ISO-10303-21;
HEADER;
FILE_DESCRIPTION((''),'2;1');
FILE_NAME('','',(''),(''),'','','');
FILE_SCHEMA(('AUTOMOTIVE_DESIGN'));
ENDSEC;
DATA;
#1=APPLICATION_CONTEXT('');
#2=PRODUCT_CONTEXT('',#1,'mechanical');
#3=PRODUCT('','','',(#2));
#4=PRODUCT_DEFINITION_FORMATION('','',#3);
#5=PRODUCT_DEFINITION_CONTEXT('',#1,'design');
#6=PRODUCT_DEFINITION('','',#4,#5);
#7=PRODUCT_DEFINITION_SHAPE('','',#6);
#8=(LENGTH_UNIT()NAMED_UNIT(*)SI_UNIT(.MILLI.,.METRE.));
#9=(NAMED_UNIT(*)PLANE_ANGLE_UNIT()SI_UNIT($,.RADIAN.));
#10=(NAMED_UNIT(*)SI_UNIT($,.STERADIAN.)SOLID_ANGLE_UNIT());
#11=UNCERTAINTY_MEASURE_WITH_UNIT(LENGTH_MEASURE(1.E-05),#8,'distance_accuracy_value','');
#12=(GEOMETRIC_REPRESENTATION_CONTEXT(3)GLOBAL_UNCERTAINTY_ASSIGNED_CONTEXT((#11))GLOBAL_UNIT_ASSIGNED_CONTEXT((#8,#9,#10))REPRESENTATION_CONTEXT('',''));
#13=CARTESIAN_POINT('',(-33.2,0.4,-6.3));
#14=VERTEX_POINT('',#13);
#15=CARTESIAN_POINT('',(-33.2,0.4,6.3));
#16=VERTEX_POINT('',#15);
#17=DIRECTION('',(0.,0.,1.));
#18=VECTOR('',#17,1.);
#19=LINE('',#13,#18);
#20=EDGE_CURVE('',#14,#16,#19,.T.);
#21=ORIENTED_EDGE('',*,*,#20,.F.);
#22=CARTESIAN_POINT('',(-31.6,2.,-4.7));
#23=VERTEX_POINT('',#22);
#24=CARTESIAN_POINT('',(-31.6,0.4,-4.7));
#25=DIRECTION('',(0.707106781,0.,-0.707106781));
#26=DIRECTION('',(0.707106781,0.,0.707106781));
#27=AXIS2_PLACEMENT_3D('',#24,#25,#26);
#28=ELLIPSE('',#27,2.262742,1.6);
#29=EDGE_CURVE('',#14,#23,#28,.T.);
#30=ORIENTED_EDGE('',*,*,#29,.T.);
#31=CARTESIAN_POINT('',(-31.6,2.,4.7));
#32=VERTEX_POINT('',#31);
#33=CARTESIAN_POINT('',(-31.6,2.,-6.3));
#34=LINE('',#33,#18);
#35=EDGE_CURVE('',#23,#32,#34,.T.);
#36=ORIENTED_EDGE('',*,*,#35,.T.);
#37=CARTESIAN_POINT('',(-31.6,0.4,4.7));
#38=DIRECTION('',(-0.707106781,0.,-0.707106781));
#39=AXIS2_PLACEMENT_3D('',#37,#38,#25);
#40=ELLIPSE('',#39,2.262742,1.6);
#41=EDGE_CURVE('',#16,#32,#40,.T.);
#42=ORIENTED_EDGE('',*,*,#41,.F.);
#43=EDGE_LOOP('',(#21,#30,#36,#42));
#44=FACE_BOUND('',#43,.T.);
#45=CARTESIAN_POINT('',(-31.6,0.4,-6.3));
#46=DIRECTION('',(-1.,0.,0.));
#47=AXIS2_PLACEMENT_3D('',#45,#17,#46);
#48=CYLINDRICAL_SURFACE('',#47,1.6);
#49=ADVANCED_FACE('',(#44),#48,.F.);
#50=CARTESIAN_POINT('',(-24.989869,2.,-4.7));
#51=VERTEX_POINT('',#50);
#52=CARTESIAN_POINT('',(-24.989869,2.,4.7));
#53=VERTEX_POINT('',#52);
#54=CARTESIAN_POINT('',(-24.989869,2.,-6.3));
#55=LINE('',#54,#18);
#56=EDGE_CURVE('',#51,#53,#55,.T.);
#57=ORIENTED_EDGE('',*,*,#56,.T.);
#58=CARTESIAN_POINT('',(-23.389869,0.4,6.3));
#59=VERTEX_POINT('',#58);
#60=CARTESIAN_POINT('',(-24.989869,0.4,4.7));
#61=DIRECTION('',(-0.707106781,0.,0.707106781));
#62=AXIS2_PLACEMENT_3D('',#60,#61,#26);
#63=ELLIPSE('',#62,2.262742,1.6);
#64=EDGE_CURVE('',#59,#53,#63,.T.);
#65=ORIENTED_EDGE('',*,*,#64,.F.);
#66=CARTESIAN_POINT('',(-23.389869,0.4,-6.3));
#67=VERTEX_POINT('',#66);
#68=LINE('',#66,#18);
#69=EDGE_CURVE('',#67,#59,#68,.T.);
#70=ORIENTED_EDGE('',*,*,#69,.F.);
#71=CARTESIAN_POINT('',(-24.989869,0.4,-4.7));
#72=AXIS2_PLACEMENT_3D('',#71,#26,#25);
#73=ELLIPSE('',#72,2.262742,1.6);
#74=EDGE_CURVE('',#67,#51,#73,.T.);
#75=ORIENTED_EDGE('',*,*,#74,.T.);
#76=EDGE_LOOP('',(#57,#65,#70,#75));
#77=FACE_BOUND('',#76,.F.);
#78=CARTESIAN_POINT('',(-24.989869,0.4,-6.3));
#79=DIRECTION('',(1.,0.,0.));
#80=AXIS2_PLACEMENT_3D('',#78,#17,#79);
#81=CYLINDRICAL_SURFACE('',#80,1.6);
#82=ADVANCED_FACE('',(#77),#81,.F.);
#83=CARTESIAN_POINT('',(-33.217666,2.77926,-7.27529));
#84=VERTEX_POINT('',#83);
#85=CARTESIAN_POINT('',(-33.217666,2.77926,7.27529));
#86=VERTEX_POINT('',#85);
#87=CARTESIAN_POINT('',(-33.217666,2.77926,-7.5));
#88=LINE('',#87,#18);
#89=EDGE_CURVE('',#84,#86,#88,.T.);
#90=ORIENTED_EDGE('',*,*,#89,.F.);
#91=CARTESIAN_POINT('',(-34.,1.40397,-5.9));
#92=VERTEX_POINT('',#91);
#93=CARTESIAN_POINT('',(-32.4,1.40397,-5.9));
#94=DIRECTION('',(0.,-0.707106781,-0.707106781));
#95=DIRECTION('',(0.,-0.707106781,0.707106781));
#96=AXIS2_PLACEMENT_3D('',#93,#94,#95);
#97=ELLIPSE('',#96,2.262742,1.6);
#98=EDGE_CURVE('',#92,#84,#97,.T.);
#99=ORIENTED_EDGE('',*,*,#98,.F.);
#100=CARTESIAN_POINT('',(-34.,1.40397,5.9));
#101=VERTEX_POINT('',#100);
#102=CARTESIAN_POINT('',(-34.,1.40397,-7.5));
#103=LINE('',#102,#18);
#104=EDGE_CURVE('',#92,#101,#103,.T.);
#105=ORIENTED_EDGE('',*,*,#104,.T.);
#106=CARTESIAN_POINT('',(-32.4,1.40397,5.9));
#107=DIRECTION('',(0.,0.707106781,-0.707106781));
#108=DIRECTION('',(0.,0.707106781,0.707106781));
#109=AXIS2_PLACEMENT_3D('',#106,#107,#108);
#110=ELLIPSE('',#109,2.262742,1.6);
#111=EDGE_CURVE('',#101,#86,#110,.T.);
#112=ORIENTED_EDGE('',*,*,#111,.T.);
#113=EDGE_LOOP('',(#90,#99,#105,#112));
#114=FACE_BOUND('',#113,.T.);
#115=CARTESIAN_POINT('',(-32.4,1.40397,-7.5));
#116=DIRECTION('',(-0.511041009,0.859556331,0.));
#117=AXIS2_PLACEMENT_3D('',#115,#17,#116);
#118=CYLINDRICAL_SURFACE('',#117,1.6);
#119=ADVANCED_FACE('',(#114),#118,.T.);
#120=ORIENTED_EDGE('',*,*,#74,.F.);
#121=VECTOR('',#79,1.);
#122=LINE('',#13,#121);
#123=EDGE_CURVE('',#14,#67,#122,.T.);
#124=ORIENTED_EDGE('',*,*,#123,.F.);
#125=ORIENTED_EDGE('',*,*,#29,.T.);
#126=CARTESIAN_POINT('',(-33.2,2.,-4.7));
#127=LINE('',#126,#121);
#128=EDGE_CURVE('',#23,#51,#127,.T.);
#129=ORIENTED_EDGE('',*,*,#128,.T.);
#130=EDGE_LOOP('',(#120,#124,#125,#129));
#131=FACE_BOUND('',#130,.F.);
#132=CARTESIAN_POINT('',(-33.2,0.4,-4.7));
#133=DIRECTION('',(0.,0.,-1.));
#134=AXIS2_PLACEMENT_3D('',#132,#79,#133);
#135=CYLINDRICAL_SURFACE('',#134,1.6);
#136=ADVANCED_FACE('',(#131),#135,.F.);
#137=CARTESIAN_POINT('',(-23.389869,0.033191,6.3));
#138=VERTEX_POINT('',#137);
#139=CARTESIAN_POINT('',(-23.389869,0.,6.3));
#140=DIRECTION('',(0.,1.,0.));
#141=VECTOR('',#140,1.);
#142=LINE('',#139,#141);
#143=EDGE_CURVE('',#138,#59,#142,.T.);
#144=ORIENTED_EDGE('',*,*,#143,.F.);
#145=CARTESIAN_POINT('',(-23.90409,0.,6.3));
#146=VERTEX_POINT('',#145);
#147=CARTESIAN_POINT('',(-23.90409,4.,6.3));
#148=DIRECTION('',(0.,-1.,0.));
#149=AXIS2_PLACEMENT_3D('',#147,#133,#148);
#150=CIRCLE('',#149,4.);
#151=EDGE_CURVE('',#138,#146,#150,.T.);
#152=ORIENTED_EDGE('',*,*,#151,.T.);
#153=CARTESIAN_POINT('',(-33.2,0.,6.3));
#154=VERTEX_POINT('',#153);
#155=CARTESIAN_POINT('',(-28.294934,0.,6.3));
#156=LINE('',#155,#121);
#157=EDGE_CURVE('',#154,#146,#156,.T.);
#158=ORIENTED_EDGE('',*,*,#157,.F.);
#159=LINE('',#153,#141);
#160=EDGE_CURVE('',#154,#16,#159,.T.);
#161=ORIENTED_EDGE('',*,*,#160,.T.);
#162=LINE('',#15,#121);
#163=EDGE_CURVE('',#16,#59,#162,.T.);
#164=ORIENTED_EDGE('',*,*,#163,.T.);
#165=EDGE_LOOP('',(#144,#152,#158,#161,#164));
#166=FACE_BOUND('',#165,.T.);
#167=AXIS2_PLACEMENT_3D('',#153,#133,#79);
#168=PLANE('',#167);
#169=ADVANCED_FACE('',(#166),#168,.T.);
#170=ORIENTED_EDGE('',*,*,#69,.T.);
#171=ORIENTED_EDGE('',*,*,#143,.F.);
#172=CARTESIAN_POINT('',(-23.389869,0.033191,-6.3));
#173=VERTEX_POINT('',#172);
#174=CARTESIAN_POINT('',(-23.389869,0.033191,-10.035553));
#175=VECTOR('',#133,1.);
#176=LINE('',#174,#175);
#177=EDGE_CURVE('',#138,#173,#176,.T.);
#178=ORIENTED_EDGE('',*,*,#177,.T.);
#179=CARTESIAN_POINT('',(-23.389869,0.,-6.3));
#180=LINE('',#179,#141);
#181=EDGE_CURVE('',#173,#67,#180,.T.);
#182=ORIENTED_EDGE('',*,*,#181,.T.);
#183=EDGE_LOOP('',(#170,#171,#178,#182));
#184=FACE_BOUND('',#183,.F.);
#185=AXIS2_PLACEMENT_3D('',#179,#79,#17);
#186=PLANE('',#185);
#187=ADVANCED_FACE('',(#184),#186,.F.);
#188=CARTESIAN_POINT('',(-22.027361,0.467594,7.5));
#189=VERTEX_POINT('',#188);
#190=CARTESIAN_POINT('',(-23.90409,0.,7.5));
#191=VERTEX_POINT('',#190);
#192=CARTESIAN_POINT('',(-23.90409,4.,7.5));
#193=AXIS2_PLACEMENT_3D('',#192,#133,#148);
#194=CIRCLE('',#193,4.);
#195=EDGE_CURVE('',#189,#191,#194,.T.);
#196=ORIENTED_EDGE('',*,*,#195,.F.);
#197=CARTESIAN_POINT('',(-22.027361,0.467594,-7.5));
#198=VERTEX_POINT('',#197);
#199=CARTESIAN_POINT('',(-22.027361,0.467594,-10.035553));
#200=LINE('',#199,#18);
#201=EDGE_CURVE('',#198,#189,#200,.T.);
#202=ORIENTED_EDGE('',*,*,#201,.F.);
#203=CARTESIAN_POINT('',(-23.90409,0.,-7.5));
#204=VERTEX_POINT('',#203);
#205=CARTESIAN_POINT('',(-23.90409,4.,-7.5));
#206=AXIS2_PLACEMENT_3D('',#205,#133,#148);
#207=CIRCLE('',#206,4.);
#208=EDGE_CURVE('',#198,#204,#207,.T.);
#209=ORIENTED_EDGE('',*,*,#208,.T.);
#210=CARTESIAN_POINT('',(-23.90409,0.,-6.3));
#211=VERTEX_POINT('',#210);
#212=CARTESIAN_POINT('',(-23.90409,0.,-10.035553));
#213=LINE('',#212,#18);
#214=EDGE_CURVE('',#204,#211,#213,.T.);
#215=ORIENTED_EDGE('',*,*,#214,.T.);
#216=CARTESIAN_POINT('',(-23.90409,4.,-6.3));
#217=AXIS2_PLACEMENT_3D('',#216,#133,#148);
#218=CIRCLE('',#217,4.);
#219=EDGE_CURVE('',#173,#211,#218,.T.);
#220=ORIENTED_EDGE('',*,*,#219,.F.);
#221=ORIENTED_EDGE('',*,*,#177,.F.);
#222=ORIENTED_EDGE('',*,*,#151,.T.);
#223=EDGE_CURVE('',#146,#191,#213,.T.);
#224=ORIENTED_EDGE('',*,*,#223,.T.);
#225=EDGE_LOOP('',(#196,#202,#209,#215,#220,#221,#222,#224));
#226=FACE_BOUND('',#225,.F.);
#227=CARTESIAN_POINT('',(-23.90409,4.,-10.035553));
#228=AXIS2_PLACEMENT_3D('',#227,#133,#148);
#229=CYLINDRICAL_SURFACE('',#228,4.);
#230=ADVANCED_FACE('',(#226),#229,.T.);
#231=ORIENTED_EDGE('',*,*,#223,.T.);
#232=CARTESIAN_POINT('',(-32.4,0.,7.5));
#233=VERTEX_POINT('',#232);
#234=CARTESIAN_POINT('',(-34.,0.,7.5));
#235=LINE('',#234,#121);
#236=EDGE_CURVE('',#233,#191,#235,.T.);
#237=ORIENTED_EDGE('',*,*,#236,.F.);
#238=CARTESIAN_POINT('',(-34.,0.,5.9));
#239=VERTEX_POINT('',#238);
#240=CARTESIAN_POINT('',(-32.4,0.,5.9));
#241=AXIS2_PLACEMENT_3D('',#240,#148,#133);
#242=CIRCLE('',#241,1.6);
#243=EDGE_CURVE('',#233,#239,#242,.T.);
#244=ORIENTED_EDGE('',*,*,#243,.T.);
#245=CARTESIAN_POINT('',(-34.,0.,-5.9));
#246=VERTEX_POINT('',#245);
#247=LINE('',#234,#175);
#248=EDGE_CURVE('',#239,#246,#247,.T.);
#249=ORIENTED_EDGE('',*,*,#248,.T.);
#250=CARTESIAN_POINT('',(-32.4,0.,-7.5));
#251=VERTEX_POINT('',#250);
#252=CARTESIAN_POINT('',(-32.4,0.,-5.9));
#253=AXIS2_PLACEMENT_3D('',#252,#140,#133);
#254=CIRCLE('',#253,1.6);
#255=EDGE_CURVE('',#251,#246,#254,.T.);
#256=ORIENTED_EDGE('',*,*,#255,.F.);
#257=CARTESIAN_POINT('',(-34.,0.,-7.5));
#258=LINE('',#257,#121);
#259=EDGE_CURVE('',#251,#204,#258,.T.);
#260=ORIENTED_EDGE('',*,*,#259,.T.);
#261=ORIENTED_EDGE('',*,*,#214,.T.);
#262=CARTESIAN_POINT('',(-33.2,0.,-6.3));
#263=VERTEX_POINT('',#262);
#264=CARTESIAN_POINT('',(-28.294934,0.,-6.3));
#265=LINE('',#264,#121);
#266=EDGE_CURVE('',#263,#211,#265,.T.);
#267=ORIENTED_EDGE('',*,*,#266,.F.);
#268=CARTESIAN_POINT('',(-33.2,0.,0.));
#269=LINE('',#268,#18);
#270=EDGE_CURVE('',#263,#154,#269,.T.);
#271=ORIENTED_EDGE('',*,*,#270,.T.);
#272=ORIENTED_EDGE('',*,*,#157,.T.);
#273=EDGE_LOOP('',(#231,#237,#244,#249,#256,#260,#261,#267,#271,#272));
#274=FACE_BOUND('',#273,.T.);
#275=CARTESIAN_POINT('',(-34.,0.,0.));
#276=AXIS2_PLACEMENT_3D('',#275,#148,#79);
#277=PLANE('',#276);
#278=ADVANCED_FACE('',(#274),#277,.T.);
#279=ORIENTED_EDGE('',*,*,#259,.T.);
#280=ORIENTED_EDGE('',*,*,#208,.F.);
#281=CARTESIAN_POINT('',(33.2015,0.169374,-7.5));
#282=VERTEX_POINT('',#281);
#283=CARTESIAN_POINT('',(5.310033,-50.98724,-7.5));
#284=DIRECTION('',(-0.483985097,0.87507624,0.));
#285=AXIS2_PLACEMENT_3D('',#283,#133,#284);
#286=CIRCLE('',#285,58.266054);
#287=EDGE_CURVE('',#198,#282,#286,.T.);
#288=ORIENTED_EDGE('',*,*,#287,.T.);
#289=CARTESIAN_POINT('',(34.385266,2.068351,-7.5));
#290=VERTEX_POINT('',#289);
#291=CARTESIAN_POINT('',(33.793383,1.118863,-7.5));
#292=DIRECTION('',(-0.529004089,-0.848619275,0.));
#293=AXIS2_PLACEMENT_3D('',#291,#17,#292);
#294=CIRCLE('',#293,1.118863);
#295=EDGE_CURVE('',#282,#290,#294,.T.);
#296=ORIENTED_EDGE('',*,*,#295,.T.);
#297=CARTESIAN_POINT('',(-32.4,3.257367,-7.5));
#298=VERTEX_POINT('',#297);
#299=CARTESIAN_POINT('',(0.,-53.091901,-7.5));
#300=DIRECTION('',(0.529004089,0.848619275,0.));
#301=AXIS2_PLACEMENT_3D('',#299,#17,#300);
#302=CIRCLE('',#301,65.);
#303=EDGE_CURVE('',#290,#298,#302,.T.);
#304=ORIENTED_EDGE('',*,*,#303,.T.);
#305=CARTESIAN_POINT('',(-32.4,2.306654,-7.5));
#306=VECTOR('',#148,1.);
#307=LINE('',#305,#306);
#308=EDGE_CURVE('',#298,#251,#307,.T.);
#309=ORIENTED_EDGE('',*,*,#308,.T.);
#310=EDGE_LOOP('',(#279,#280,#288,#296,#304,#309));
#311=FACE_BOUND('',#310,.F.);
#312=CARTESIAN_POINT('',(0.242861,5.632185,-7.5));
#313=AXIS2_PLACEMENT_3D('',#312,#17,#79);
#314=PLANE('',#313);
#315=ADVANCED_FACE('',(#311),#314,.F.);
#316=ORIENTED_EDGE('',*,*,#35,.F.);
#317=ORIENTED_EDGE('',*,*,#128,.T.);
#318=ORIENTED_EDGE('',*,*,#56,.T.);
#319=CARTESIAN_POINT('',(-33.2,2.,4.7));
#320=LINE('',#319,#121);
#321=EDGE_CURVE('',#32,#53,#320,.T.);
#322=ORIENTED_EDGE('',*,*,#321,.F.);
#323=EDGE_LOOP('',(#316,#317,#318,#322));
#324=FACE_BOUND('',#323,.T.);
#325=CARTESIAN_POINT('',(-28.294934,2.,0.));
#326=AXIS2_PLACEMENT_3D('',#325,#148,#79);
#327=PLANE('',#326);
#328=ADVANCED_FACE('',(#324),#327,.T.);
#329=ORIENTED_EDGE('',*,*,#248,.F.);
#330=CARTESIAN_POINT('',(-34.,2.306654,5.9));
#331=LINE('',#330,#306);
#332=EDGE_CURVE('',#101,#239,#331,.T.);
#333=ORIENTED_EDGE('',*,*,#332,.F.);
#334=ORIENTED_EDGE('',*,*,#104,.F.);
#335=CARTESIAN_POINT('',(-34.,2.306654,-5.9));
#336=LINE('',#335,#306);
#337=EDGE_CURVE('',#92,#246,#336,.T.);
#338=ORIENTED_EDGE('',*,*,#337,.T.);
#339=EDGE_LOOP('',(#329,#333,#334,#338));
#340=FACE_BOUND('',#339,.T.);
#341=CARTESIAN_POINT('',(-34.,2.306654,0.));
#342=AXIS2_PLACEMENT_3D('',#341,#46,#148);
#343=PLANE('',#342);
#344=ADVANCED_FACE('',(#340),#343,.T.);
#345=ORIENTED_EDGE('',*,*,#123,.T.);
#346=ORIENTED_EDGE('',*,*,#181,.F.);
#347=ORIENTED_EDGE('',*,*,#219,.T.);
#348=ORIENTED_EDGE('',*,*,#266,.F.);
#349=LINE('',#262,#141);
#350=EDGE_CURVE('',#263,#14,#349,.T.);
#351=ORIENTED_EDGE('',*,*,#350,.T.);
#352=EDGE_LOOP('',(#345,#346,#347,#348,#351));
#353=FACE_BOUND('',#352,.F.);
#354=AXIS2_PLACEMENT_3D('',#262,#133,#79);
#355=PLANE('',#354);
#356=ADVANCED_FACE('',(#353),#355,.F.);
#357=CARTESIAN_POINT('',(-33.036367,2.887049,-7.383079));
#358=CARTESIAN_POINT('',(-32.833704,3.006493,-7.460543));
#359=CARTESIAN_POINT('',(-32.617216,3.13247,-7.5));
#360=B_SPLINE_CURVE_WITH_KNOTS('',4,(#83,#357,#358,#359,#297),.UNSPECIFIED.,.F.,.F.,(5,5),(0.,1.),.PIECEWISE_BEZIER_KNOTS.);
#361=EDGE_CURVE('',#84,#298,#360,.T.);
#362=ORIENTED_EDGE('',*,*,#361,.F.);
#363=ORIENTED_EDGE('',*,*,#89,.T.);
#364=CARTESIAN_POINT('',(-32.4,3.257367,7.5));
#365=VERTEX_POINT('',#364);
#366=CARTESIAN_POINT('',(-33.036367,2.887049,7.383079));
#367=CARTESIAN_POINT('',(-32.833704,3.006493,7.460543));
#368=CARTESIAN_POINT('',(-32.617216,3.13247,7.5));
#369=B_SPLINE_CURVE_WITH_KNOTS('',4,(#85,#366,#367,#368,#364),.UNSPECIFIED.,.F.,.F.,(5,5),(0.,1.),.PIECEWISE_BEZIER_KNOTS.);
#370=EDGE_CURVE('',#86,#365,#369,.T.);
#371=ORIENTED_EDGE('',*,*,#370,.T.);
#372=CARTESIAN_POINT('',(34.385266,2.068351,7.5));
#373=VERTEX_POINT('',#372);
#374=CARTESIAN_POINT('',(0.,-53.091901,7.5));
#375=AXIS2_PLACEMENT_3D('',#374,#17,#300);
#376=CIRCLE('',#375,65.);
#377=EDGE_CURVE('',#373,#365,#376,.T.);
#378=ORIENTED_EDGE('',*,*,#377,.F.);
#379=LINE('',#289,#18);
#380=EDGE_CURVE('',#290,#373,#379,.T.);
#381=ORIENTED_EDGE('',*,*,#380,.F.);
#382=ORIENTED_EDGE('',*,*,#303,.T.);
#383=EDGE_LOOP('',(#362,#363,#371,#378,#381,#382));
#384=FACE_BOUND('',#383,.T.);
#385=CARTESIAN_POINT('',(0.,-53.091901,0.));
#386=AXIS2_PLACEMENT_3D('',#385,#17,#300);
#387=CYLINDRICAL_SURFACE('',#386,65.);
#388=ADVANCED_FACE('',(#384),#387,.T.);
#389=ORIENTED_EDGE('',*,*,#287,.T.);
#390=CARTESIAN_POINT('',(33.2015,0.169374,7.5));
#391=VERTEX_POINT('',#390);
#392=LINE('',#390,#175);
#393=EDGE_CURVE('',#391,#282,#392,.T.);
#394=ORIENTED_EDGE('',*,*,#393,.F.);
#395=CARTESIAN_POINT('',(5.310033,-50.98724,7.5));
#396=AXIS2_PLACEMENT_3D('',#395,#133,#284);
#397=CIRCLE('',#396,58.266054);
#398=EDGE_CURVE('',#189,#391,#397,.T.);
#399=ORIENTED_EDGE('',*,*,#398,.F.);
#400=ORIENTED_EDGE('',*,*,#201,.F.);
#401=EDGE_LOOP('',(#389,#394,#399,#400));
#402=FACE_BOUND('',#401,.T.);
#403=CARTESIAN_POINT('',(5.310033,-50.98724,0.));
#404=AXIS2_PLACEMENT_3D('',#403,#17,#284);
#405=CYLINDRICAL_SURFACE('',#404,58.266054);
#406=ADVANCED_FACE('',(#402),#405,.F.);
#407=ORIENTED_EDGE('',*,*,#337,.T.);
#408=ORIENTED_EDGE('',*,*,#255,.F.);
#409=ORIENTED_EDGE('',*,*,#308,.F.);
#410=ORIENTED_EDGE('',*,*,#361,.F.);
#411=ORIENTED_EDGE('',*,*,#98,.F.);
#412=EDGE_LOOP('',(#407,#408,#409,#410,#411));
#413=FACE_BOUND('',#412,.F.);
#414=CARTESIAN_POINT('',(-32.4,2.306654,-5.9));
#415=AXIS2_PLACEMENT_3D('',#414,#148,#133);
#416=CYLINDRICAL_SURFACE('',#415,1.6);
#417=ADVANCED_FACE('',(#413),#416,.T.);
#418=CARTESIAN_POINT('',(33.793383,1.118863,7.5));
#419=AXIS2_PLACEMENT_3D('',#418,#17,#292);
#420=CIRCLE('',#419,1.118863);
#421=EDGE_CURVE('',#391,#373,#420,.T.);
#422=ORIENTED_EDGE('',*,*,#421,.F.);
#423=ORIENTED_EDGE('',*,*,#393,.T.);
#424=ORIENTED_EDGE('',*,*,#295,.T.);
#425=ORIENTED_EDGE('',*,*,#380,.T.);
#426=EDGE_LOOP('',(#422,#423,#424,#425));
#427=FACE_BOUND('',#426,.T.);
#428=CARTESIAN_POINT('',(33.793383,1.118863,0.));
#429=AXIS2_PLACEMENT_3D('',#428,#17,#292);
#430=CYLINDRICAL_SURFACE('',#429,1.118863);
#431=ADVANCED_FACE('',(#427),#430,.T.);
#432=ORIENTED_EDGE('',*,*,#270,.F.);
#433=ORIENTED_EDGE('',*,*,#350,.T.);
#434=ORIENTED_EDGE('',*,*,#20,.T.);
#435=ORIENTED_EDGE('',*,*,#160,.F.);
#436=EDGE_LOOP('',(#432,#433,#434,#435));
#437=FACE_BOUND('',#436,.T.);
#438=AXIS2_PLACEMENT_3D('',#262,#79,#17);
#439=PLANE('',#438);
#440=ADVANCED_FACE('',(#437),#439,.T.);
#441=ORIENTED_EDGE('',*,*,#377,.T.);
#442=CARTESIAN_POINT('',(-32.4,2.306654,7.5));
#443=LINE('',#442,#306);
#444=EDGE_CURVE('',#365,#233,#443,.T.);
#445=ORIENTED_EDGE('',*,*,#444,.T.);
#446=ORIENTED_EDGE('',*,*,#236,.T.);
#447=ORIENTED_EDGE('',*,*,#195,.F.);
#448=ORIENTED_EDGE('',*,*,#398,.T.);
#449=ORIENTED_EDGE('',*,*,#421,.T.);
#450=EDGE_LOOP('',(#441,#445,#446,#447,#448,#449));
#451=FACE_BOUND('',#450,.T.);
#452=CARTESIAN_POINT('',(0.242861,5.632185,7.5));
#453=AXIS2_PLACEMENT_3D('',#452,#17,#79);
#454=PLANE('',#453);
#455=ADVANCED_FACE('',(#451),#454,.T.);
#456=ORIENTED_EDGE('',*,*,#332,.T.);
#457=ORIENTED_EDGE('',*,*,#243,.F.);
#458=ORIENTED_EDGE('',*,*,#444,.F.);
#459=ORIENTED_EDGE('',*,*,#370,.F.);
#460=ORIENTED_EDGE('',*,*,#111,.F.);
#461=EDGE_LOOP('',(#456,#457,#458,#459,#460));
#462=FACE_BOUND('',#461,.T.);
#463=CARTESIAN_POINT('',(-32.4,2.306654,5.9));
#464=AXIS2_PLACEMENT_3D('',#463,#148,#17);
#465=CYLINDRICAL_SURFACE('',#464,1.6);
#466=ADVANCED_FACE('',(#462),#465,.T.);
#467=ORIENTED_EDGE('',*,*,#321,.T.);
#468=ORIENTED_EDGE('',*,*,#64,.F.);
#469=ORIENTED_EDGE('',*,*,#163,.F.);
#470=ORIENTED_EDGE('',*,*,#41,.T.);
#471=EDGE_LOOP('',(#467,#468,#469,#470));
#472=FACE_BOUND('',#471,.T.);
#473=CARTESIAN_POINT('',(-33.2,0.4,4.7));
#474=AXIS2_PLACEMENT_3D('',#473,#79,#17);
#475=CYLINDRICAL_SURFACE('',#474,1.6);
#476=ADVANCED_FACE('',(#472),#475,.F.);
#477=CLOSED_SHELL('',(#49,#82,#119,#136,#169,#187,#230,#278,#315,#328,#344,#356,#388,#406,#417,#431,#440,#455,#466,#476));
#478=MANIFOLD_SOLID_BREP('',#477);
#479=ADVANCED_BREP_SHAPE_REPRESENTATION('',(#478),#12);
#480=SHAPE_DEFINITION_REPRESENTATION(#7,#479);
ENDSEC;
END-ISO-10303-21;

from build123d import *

# Parameters (mm, degrees)
F1_DEPTH    = 7.5
F2_W        = 9.8101310167
F2_H        = 12.6
F3_DEPTH    = 2
F4_R        = 1.6
F5_T1_DEPTH = 20.0711055919


# Not quite as in the source:
# - a fillet or chamfer that OpenCascade refuses, or shapes differently, is made with other operations: its cross-section is extruded or revolved along the edge and cut away or added


with BuildPart() as f1:
    # F0 (on Top) → F1 (new body, symmetric)
    with BuildSketch(Plane.XY):
        with BuildLine():
            ThreePointArc((33.2014997867, 0.1693742672), (34.7428713669, 0.5269798189), (34.3852658153, 2.068351399))
            ThreePointArc((34.3852658153, 2.068351399), (0.2265050268, 11.9077038946), (-34, 2.3066544839))
            Line((-34, 2.3066544839), (-34, 0))
            Line((-34, 0), (-22.8898689833, 0))
            ThreePointArc((-22.8898689833, 0), (5.1340927179, 7.2785489292), (33.2014997867, 0.1693742672))
        make_face()
    extrude(amount=F1_DEPTH, both=True)

    # F2 (on Front) → F3 (cut)
    with BuildSketch(Plane.XZ):
        with Locations((-28.2949344917, 0)):
            Rectangle(F2_W, F2_H)
    extrude(amount=-F3_DEPTH, mode=Mode.SUBTRACT)

    # F4
    f4_edges = [f1.edges().sort_by_distance(p)[0] for p in [
        (-28.294934, 2, 6.3),
        (-33.2, 2, 0),
        (-28.294934, 2, -6.3),
        (-23.389869, 2, 0),
        (-34, 2.306654, 0),
        (-34, 1.153327, 7.5),
        (-34, 1.153327, -7.5),
    ]]
    fillet(f4_edges, radius=F4_R)

    # F5: fillet of radius 4 on 1 edges, made by hand

    # F5_s2 → F5_t1 (cut)
    with BuildSketch(Plane.XY.offset(-10.0355527959)):
        with BuildLine():
            ThreePointArc((-23.9040901017, 0), (-22.9370384998, 0.1186585825), (-22.0273613841, 0.4675944003))
            ThreePointArc((-22.0273613841, 0.4675944003), (-22.4595993901, 0.2356126314), (-22.8898689833, 0))
            Line((-22.8898689833, 0), (-23.9040901017, 0))
        make_face()
    extrude(amount=F5_T1_DEPTH, mode=Mode.SUBTRACT)


solid = f1.part
